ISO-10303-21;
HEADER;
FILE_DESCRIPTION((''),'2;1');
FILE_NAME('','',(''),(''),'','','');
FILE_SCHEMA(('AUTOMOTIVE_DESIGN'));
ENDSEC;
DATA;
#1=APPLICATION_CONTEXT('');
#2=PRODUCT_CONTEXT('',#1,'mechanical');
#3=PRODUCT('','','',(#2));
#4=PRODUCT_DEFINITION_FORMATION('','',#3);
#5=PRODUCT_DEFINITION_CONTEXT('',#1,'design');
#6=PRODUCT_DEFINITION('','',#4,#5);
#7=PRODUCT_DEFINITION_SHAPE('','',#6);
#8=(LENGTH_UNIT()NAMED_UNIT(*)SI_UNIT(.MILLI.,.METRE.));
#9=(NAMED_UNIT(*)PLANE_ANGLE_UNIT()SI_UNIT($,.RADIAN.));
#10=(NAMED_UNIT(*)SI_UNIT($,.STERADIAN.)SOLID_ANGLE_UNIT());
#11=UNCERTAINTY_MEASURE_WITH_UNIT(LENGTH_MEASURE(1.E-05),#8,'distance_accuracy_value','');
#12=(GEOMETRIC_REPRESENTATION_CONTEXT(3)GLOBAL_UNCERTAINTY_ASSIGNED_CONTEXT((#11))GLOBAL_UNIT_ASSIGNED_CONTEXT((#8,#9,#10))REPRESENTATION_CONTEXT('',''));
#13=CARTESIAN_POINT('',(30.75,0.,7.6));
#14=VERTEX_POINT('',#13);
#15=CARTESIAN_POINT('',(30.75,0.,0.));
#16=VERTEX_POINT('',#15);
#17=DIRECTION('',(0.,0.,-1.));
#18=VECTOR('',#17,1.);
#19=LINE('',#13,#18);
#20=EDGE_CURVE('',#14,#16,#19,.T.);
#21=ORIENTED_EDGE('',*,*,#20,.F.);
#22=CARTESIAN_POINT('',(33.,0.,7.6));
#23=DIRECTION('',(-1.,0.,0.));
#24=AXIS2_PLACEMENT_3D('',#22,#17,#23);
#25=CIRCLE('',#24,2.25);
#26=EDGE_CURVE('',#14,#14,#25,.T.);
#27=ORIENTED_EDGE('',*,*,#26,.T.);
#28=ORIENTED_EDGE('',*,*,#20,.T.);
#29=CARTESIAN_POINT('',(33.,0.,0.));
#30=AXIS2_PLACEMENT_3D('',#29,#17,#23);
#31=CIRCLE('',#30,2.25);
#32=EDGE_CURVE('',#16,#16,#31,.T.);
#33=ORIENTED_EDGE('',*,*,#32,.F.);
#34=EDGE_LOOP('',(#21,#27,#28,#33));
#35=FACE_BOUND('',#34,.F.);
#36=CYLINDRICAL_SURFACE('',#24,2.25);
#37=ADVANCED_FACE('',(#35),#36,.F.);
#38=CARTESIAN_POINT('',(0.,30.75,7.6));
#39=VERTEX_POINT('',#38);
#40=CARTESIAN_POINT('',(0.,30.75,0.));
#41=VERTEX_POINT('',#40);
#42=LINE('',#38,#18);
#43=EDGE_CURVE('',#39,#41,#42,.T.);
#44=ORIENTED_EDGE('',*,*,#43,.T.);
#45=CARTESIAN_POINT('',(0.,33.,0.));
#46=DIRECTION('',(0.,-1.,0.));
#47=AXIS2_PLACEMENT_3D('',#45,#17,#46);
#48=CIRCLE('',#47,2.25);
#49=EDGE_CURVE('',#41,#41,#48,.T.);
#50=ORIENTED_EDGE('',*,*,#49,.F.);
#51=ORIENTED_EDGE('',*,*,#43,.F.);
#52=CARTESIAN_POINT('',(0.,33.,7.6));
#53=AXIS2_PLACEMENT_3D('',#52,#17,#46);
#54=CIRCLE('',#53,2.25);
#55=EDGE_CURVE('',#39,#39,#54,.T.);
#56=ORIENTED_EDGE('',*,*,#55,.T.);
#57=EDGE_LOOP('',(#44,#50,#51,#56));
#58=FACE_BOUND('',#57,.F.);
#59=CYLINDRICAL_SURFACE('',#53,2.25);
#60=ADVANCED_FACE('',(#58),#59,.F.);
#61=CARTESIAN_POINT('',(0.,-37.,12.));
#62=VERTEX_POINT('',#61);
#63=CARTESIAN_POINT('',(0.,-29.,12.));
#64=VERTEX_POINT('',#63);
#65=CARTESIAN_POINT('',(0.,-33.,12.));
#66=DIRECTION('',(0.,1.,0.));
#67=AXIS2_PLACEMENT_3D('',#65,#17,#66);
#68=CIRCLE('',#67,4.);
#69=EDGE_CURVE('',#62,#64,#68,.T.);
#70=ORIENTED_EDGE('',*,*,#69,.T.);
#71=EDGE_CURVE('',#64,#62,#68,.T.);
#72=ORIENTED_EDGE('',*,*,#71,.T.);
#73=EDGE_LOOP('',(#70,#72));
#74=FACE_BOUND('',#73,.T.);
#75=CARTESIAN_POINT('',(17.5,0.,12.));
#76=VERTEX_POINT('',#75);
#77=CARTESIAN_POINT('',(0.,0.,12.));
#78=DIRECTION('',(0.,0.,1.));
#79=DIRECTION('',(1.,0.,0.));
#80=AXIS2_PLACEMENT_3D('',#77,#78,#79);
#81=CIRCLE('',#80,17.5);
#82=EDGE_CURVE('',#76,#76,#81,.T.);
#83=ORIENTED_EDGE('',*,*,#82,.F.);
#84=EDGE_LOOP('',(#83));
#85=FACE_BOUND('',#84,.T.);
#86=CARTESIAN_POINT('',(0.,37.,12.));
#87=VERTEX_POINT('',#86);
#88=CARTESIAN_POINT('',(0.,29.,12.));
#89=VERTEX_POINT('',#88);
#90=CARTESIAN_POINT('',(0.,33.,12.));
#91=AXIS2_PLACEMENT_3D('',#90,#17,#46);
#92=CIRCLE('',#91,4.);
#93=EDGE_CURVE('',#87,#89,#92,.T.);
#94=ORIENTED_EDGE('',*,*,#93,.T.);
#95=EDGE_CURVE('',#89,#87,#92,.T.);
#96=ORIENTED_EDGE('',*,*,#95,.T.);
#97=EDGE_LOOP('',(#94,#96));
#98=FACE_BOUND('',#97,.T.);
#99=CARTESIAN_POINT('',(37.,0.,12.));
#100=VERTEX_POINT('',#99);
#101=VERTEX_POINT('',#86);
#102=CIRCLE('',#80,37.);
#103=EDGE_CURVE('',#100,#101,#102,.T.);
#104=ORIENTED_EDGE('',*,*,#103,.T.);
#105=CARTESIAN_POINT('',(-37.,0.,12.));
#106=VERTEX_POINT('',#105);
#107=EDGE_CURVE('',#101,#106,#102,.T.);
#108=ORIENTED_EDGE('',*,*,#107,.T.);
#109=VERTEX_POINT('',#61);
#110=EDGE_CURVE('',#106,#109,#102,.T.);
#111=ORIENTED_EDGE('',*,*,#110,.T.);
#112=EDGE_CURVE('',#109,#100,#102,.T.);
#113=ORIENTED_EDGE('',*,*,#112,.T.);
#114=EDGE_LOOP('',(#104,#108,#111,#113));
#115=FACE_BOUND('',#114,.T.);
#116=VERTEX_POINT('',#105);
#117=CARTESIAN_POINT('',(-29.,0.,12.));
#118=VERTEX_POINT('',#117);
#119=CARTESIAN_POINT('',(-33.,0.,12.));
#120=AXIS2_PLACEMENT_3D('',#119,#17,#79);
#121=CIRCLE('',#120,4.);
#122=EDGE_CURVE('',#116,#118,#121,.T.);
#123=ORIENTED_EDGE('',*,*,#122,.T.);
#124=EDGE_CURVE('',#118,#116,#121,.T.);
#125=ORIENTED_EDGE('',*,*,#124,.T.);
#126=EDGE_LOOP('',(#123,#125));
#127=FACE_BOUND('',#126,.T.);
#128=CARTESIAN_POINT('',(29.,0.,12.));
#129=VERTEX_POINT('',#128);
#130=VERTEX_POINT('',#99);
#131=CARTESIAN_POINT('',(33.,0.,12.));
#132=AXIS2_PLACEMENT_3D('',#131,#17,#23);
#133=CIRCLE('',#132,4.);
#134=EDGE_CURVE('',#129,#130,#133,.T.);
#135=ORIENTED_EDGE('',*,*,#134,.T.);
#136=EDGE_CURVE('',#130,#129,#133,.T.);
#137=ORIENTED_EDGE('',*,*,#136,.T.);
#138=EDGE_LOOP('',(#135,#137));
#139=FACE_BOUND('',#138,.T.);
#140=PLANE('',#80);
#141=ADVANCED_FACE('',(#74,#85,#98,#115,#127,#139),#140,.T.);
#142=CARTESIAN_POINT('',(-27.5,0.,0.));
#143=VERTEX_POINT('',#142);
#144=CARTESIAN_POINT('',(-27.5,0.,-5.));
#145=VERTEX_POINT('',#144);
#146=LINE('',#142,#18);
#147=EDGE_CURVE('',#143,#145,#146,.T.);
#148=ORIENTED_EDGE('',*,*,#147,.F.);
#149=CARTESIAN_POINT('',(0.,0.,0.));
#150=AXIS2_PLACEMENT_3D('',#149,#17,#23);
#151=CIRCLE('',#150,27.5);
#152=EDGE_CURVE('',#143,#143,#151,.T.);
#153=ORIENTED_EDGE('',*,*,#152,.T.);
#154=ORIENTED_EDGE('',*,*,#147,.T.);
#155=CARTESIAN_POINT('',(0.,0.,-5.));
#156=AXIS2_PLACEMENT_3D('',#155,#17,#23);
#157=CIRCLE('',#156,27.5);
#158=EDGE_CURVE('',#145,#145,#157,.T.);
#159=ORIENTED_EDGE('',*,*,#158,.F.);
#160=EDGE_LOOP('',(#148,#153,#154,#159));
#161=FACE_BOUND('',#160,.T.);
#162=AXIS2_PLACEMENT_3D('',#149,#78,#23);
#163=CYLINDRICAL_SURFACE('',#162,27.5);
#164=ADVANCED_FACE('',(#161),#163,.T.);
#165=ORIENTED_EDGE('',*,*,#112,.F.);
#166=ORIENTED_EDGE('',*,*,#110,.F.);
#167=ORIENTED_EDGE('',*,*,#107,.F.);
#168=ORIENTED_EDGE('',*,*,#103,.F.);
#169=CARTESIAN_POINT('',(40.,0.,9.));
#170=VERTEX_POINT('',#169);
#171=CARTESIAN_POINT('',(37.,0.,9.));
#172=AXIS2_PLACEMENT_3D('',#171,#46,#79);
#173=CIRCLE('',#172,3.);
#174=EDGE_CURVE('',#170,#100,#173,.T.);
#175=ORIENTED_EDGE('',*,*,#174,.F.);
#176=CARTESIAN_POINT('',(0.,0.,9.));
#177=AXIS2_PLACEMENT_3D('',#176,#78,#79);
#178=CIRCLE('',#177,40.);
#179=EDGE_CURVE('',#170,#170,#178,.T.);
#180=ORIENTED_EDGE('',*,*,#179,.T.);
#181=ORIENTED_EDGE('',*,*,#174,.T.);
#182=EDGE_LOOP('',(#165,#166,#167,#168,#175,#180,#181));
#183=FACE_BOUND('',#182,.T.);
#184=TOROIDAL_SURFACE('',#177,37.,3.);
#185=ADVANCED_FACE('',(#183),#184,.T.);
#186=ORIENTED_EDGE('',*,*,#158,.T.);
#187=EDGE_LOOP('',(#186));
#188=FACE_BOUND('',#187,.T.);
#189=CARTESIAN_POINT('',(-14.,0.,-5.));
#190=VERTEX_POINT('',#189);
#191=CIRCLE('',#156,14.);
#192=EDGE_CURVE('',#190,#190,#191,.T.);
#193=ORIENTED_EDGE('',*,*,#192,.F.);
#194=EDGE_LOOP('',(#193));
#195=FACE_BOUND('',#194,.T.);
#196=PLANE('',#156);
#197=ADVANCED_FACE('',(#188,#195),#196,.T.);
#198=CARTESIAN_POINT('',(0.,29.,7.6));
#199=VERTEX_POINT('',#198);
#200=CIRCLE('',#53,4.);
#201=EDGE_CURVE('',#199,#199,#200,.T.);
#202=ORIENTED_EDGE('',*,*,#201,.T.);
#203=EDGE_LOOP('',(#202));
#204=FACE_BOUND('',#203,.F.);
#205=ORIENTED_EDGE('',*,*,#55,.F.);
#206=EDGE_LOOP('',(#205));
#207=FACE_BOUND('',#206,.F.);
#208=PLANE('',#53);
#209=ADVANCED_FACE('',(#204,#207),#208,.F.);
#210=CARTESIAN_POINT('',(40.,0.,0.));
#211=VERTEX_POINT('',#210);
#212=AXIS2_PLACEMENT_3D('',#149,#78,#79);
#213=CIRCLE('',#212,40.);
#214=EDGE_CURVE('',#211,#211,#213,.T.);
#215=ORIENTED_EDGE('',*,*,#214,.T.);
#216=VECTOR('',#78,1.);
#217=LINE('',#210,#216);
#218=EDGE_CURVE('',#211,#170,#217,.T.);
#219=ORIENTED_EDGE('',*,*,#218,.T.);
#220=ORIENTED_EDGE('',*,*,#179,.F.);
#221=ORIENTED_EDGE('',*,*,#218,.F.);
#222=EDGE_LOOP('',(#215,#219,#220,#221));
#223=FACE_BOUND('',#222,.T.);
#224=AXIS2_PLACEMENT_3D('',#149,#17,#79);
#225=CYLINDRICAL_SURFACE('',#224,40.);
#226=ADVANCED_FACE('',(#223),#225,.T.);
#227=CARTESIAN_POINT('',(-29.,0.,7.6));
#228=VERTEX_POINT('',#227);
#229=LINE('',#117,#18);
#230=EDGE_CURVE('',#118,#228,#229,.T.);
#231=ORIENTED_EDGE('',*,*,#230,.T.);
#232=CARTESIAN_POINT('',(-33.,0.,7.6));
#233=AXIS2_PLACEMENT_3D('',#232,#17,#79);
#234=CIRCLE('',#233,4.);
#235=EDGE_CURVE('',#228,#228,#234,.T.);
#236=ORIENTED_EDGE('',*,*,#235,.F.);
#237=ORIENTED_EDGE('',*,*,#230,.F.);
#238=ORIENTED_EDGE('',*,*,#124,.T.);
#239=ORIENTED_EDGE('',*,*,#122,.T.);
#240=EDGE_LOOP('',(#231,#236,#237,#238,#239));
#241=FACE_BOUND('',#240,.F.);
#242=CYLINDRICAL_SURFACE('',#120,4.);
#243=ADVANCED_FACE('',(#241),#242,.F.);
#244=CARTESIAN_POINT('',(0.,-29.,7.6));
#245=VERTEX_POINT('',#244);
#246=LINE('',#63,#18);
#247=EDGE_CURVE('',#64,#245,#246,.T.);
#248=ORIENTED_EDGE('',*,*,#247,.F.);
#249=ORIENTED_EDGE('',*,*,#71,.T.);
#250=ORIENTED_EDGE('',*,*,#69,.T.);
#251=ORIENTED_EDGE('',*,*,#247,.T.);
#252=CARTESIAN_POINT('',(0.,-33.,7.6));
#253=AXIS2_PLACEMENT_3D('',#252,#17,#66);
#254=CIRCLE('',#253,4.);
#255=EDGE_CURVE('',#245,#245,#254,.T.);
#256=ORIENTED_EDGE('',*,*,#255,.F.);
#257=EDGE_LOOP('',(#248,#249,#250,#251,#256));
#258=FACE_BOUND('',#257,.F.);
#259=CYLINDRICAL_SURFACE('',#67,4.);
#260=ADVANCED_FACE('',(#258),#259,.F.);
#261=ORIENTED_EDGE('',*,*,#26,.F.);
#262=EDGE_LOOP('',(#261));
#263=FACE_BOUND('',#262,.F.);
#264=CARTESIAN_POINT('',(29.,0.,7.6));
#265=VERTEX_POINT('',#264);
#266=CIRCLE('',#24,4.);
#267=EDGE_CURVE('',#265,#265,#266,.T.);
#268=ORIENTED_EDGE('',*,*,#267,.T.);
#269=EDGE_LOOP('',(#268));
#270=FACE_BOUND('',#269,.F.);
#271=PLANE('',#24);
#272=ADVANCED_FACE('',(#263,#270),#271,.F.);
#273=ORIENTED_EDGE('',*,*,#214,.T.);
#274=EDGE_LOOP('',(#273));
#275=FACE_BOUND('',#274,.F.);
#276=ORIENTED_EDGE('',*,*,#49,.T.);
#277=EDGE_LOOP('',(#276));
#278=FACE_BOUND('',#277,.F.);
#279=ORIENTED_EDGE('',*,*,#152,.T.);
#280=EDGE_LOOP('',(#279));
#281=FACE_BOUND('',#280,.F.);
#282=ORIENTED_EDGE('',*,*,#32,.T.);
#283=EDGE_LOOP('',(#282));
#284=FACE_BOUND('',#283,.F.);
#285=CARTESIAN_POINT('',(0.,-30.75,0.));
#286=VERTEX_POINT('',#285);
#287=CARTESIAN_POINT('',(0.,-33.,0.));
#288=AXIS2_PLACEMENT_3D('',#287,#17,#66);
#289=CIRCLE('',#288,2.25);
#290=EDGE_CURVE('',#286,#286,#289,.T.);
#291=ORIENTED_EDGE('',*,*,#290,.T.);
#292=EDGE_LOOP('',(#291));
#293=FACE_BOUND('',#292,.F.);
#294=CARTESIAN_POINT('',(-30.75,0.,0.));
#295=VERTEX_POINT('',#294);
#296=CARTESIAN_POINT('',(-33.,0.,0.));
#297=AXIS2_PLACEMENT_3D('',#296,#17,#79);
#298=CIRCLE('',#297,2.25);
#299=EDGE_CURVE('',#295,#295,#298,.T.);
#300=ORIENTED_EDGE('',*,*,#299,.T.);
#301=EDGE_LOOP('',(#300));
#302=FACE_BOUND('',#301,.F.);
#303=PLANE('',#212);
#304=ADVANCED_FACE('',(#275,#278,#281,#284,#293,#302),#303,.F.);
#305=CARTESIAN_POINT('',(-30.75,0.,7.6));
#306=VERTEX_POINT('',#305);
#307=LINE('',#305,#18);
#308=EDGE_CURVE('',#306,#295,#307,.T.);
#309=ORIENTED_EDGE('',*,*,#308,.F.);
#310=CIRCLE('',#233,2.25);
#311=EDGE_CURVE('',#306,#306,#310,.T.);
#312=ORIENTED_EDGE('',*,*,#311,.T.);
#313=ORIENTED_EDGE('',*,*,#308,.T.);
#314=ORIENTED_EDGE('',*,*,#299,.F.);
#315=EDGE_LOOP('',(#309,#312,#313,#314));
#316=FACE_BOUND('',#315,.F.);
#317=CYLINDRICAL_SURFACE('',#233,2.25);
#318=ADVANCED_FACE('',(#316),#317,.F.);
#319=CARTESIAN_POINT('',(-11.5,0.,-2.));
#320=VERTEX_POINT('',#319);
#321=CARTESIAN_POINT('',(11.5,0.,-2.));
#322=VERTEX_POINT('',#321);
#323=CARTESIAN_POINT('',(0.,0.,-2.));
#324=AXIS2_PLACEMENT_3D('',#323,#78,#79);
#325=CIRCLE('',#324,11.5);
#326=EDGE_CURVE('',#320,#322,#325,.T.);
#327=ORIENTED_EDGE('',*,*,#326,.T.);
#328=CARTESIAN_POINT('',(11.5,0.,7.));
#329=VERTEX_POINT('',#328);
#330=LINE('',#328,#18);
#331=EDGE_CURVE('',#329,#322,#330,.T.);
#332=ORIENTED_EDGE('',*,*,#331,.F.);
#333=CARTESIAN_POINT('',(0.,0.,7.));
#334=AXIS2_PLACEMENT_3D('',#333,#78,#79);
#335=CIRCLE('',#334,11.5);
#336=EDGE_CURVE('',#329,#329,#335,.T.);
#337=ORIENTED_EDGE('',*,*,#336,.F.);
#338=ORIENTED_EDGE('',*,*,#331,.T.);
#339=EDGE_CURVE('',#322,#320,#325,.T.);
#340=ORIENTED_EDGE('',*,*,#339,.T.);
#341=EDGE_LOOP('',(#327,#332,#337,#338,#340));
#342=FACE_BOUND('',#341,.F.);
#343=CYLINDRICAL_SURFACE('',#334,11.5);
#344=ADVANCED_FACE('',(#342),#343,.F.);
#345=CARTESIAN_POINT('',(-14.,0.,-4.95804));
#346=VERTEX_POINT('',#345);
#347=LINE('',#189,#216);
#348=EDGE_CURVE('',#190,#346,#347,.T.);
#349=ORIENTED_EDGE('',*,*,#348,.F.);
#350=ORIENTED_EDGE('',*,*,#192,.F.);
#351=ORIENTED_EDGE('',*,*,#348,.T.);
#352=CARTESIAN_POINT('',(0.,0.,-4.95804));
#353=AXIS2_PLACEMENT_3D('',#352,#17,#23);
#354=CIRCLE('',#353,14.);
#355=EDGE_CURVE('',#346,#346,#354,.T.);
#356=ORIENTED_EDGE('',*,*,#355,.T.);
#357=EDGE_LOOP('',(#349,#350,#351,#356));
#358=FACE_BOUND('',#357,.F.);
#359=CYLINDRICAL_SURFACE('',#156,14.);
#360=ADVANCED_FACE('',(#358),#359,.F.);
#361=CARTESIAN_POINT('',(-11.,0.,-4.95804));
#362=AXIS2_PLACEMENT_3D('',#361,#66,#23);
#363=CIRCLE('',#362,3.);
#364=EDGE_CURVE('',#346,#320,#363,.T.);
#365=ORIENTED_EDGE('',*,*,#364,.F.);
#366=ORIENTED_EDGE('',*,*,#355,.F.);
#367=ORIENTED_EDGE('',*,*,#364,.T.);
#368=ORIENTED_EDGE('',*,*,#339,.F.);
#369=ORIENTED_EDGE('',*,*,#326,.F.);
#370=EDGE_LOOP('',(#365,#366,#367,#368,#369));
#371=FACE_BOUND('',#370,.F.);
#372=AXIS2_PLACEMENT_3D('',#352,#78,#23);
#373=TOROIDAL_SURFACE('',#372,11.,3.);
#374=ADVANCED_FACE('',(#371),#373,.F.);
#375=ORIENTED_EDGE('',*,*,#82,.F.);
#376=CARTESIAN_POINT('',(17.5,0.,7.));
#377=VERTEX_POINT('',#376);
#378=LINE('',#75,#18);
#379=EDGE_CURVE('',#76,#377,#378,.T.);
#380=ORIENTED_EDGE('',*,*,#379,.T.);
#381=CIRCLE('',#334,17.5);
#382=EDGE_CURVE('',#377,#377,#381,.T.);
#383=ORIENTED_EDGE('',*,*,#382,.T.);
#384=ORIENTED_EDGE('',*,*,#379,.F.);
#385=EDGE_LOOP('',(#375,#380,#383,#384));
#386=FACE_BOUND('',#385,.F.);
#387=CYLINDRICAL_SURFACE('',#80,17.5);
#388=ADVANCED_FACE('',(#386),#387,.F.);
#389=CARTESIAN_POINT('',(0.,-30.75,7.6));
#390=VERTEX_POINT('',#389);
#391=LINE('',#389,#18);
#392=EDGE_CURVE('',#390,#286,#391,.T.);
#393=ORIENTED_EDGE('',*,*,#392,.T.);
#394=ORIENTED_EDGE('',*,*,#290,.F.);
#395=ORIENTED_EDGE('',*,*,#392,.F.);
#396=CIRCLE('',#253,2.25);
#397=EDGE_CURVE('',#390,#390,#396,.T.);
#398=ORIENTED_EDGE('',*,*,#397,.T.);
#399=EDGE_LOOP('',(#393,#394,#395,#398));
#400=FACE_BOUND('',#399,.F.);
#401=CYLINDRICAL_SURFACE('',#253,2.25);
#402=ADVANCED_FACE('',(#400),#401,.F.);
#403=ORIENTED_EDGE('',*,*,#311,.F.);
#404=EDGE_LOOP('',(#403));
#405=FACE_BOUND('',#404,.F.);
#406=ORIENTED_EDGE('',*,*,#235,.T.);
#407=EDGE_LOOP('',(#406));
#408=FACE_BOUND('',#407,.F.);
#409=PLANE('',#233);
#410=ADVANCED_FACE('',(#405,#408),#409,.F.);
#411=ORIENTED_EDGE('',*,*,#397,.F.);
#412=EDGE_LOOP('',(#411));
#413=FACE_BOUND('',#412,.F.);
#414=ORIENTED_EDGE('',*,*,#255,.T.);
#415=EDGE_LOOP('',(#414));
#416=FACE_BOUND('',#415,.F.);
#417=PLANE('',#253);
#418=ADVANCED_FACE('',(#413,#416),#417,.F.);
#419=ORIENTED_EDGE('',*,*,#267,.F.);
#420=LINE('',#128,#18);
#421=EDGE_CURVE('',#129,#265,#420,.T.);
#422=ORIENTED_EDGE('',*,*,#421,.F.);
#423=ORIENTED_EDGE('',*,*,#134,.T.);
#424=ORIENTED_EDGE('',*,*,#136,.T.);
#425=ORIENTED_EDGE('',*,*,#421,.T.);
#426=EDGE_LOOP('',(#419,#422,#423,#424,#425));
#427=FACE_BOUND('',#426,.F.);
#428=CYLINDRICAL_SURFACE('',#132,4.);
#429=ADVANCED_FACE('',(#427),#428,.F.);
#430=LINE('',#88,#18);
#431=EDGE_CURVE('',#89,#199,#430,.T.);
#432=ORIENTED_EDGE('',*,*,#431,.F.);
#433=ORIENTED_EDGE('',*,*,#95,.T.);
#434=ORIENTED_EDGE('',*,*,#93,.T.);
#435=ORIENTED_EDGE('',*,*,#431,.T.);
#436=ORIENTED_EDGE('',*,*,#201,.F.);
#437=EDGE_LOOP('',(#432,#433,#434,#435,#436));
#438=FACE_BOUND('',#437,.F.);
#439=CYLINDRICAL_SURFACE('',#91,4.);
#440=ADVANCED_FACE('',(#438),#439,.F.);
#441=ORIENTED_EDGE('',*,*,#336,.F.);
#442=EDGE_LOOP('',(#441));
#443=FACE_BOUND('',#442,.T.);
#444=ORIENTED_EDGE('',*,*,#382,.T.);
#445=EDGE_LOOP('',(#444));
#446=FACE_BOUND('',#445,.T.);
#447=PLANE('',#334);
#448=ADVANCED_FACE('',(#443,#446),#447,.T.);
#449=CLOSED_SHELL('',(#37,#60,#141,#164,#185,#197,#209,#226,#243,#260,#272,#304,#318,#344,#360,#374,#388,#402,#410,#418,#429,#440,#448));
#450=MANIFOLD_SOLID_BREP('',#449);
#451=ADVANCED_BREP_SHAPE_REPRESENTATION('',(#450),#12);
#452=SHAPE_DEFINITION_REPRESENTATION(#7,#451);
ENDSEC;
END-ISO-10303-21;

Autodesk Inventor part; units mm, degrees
ref_plane "YZ Plane" through (0, 0, 0) normal (1, 0, 0) x (0, 1, 0)
ref_plane "XZ Plane" through (0, 0, 0) normal (0, 1, 0) x (-1, 0, 0)
ref_plane "XY Plane" through (0, 0, 0) normal (0, 0, 1) x (1, 0, 0)
sketch "스케치4" plane through (0, 0, 0) normal (0, 0, 1) x (1, 0, 0)
  circle A0 centre (0, 0) radius 40
  dimension "d28" = 80
extrude "돌출4" add sketch "스케치4" along normal blind 12
sketch "스케치6" plane through (0, 0, 0) normal (0, 0, -1) x (-1, 0, 0)
  circle A0 centre (0, 0) radius 27.5
  dimension "d34" = 55
extrude "돌출6" add sketch "스케치6" along normal blind 5
sketch "스케치9" plane through (0, 0, -5) normal (0, 0, -1) x (-1, 0, 0)
  circle A0 centre (0, 0) radius 14
  dimension "d44" = 28
extrude "돌출9" cut sketch "스케치9" against normal blind 3
sketch "스케치12" plane through (0, 0, 12) normal (0, 0, 1) x (1, 0, 0)
  circle A0 centre (0, 33) radius 3
  point P0 (0, 0)
  dimension "d61" = 6
  dimension "d62" = 33
hole "구멍1" at (0, 33, 12) direction (0, 0, -1) diameter 4.5 end through all counterbore diameter 8 counterbore depth 4.4
sketch "스케치13" plane through (0, 0, 12) normal (0, 0, 1) x (1, 0, 0)
  circle A0 centre (0, 0) radius 17.5
  dimension "d74" = 35
extrude "돌출11" cut sketch "스케치13" against normal blind 5
sketch "스케치14" plane through (0, 0, 7) normal (0, 0, 1) x (1, 0, 0)
  circle A0 centre (0, 0) radius 11.5
  dimension "d77" = 23
extrude "돌출12" cut sketch "스케치14" against normal up to next
pattern_circular "원형 패턴3" count 4 over 360 about axis through (0, 0, 7) along (0, 0, -1) of "구멍1"
fillet "모깎기3" radius 3 2 edges at (-40, 0, 12) (14, 0, -2)
properties part number "도면3-2번"
